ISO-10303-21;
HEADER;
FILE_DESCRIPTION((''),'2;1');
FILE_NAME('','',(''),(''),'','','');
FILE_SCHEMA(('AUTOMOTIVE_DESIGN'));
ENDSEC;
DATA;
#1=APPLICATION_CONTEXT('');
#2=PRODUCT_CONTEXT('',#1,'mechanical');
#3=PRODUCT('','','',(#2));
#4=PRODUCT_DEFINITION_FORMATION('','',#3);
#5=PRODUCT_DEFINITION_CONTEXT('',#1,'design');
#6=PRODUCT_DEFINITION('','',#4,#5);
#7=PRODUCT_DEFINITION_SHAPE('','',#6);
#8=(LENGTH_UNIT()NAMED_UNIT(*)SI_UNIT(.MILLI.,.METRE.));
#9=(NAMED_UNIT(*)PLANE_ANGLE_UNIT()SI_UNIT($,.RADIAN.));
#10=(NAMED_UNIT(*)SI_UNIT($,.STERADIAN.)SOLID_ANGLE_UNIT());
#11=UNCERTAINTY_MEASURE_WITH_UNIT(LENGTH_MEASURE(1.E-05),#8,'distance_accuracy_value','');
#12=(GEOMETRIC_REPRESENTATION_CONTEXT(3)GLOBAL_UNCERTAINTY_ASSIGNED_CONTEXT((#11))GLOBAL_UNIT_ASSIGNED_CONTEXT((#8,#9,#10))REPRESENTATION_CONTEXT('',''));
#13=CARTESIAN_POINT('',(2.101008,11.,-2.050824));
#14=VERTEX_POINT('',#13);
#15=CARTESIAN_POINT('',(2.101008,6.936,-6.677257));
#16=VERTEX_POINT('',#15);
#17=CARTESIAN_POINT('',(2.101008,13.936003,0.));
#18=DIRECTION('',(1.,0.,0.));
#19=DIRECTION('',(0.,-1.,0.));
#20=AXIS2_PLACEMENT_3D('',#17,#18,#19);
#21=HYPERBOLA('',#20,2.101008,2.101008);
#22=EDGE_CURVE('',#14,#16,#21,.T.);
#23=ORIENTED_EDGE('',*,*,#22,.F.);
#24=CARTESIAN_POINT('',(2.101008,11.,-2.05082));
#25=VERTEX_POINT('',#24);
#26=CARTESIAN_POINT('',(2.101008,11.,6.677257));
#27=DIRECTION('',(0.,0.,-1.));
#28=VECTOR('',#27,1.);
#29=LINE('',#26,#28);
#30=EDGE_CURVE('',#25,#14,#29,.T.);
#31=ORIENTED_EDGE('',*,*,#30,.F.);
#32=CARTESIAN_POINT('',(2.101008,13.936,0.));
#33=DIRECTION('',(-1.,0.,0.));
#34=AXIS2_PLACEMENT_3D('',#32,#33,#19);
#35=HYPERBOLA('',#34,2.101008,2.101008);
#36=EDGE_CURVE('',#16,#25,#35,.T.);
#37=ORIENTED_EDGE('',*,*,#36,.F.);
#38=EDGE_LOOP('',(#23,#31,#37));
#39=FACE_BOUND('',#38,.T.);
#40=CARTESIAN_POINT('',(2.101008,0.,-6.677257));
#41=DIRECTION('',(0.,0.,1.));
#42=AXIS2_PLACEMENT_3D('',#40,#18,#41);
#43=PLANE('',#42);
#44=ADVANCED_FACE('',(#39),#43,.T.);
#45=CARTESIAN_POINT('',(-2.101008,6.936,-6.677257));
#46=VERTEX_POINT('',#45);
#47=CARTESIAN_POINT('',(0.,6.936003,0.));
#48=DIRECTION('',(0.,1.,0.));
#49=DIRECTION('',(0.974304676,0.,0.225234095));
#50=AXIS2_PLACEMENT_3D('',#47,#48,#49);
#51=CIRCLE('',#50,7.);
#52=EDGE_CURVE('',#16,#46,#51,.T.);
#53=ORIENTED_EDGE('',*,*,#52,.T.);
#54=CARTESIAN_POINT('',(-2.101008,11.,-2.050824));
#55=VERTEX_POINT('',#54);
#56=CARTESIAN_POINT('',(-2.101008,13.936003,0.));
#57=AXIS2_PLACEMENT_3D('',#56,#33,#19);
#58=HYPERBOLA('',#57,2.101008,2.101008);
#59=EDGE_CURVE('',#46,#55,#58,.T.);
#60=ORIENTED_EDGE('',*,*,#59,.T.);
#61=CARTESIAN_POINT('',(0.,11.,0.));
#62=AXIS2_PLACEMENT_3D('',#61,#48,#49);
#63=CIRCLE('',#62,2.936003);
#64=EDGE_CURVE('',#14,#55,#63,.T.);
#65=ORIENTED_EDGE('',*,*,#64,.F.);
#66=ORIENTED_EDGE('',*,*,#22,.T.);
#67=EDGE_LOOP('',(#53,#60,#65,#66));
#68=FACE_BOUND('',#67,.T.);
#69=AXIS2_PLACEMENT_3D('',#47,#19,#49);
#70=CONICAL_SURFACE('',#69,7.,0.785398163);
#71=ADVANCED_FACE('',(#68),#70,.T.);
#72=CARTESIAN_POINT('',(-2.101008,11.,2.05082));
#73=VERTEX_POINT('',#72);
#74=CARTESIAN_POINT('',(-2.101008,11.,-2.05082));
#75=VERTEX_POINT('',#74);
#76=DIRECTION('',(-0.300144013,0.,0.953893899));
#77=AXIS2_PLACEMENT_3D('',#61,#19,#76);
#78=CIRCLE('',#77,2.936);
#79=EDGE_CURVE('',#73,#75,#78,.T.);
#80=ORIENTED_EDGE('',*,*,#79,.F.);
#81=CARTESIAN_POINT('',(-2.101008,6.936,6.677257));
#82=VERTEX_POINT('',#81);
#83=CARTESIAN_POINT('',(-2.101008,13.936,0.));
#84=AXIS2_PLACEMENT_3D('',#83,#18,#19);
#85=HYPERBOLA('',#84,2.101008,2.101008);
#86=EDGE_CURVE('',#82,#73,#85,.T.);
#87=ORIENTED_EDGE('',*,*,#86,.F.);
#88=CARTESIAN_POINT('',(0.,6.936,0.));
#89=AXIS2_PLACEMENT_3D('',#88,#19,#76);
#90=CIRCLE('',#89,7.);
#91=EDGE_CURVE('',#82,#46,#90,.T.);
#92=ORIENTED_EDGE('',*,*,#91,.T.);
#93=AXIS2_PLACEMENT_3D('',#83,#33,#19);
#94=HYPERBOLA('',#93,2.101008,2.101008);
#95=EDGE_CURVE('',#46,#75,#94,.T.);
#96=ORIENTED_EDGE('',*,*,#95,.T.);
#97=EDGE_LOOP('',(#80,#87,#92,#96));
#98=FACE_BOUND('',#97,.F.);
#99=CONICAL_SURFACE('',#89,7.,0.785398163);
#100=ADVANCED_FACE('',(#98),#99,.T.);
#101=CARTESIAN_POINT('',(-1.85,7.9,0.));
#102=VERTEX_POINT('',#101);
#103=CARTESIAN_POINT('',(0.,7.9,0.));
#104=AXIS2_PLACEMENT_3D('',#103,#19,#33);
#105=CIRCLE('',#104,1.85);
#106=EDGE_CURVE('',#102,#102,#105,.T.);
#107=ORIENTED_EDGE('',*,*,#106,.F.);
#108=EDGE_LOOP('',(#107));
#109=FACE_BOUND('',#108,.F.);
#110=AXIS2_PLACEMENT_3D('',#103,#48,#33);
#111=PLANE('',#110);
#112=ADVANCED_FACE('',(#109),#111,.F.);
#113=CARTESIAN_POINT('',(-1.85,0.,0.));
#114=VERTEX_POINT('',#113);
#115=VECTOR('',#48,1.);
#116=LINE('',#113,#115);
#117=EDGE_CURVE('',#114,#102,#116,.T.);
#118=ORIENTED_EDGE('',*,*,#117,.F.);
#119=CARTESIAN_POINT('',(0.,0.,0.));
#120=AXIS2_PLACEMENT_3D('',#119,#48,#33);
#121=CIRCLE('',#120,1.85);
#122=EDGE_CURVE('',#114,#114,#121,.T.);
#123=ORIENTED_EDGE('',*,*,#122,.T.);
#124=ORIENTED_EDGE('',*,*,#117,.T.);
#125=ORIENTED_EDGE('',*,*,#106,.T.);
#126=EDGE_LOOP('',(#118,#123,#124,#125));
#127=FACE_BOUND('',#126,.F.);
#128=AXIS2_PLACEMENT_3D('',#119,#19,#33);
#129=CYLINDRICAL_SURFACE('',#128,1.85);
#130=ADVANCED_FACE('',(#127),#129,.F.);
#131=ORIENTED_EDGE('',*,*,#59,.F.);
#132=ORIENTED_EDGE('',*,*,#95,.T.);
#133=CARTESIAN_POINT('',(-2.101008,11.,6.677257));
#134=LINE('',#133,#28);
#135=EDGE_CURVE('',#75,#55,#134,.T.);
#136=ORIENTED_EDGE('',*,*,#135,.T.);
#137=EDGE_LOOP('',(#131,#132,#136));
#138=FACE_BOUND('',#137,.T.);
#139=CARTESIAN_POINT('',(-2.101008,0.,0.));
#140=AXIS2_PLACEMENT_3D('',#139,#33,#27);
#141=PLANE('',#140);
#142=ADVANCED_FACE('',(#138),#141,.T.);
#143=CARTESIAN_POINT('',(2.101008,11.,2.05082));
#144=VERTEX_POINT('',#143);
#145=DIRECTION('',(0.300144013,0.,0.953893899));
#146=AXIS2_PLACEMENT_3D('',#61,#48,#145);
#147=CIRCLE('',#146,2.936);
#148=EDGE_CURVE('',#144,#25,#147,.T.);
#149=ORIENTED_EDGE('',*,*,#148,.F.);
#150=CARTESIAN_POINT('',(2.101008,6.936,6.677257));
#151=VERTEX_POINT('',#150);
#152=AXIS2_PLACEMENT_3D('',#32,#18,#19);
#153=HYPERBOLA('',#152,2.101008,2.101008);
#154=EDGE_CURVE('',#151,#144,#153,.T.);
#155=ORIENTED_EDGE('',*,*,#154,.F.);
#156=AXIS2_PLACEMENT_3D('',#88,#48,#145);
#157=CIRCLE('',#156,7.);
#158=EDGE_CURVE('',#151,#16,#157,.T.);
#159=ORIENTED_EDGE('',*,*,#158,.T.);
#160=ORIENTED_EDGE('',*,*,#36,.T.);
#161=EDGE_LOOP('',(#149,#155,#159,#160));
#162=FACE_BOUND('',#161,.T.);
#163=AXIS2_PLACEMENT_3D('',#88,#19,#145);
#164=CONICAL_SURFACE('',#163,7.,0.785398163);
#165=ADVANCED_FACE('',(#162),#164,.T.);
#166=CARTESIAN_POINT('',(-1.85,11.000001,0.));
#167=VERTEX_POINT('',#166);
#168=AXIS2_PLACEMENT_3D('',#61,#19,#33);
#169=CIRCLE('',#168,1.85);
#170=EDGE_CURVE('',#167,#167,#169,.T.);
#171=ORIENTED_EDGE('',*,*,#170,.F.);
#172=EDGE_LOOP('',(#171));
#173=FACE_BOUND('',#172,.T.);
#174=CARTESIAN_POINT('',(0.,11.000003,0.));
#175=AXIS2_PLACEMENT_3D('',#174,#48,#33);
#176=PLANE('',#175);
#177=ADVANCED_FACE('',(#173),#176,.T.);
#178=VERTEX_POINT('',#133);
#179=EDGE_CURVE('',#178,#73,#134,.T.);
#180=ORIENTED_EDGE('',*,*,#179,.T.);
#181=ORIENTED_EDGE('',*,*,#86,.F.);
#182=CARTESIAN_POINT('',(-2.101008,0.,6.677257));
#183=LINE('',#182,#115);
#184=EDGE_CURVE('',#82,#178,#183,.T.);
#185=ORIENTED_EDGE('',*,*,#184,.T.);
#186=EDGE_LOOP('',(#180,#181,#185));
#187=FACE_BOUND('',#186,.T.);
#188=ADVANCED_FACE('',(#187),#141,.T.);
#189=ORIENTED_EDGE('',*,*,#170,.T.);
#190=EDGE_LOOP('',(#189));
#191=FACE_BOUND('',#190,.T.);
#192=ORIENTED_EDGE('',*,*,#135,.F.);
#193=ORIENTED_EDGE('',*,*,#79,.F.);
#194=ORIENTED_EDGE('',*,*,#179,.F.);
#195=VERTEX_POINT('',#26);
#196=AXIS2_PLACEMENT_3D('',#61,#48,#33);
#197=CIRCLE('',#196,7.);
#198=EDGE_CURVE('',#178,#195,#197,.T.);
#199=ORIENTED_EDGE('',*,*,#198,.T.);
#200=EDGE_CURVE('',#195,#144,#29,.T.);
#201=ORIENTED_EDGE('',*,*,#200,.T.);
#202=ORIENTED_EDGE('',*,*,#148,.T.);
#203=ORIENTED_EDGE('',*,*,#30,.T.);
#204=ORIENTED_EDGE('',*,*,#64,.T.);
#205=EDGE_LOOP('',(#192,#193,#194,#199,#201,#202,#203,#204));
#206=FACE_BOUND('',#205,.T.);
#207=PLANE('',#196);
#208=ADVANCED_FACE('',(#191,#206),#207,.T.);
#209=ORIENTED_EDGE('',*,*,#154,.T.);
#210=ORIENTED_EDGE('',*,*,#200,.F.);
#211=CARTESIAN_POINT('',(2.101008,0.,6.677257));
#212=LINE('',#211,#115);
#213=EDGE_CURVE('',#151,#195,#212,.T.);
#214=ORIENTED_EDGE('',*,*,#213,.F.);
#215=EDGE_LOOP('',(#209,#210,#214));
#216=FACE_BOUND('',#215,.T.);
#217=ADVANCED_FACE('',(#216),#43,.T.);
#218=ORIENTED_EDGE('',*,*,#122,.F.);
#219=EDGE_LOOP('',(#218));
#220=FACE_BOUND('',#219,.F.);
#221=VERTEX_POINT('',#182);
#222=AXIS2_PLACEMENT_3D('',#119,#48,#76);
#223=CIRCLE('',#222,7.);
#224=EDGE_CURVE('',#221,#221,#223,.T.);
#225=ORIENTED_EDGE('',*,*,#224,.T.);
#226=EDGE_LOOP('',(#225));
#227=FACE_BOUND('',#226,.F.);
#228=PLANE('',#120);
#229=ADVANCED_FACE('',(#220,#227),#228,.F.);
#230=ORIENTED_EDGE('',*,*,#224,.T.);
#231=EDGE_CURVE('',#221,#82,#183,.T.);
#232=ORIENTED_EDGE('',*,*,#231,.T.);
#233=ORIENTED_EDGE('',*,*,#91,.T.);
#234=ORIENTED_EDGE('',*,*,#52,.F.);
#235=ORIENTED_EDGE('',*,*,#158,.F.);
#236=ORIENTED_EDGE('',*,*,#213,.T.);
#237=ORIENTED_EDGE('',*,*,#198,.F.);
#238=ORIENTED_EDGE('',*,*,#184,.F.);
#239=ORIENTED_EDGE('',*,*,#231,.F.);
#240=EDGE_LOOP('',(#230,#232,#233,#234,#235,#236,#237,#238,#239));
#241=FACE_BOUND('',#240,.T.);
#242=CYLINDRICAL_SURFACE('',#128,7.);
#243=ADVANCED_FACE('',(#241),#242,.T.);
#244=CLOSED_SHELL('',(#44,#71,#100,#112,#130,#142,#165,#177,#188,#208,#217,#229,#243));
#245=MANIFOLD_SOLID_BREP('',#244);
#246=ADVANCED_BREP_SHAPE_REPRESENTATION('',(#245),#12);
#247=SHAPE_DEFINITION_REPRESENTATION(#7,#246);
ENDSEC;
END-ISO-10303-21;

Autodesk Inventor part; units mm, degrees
ref_plane "YZ Plane" through (0, 0, 0) normal (1, 0, 0) x (0, 1, 0)
ref_plane "XZ Plane" through (0, 0, 0) normal (0, 1, 0) x (-1, 0, 0)
ref_plane "XY Plane" through (0, 0, 0) normal (0, 0, 1) x (1, 0, 0)
sketch "Sketch1" plane through (0, 0, 0) normal (0, 1, 0) x (-1, 0, 0)
  circle A0 centre (0, 0) radius 1.85
  circle A1 centre (0, 0) radius 7
  line L0 (-2.101008, -6.677257) -> (-2.101008, 6.677257)
  line L1 (-2.101008, 6.677257) -> (2.101008, 6.677257)
  line L2 (2.101008, 6.677257) -> (2.101008, -6.677257)
  line L3 (2.101008, -6.677257) -> (-2.101008, -6.677257)
  line L4 (-2.101008, -6.677257) -> (2.101008, 6.677257) construction
  line L5 (-2.101008, 6.677257) -> (2.101008, -6.677257) construction
  line L6 (2.101008, 0) -> (-2.101008, 0)
  point P0 (-1.841091, -0.181341)
  point P1 (1.841091, 0.181341)
  point P2 (2.101008, -6.677257)
  point P3 (1.85, 6.751111)
  point P4 (-2.101008, -6.677257)
  point P5 (2.101008, -6.677257)
  point P6 (-2.101008, 6.677257)
  dimension "d1" = 14
  dimension "d0" = 3.7
extrude "Extrusion1" add sketch "Sketch1" along normal blind 11 contours L2 A1 | L0 A1
chamfer "Chamfer1" distance 4.064 angle 45 2 edges at (-7, 11, 0) (7, 11, 0)
extrude "Extrusion2" add sketch "Sketch1" along normal blind 11 contours L6 L2 L3 L0 A0 | A0 L6 L0 L1 L2
extrude "Extrusion3" add sketch "Sketch1" along normal blind 11.000003 contours A1 L3
chamfer "Chamfer2" distance 4.064 angle 45 1 edges at (0, 11, -7)
extrude "Extrusion4" add sketch "Sketch1" along normal blind 11.000003 contours L6 A0 | A0 L6
extrude "Extrusion5" cut sketch "Sketch1" along normal blind 7.9 contours L6 A0 | A0 L6
extrude "Extrusion6" add sketch "Sketch1" along normal blind 11 contours L1 A1
properties part number "knob"
